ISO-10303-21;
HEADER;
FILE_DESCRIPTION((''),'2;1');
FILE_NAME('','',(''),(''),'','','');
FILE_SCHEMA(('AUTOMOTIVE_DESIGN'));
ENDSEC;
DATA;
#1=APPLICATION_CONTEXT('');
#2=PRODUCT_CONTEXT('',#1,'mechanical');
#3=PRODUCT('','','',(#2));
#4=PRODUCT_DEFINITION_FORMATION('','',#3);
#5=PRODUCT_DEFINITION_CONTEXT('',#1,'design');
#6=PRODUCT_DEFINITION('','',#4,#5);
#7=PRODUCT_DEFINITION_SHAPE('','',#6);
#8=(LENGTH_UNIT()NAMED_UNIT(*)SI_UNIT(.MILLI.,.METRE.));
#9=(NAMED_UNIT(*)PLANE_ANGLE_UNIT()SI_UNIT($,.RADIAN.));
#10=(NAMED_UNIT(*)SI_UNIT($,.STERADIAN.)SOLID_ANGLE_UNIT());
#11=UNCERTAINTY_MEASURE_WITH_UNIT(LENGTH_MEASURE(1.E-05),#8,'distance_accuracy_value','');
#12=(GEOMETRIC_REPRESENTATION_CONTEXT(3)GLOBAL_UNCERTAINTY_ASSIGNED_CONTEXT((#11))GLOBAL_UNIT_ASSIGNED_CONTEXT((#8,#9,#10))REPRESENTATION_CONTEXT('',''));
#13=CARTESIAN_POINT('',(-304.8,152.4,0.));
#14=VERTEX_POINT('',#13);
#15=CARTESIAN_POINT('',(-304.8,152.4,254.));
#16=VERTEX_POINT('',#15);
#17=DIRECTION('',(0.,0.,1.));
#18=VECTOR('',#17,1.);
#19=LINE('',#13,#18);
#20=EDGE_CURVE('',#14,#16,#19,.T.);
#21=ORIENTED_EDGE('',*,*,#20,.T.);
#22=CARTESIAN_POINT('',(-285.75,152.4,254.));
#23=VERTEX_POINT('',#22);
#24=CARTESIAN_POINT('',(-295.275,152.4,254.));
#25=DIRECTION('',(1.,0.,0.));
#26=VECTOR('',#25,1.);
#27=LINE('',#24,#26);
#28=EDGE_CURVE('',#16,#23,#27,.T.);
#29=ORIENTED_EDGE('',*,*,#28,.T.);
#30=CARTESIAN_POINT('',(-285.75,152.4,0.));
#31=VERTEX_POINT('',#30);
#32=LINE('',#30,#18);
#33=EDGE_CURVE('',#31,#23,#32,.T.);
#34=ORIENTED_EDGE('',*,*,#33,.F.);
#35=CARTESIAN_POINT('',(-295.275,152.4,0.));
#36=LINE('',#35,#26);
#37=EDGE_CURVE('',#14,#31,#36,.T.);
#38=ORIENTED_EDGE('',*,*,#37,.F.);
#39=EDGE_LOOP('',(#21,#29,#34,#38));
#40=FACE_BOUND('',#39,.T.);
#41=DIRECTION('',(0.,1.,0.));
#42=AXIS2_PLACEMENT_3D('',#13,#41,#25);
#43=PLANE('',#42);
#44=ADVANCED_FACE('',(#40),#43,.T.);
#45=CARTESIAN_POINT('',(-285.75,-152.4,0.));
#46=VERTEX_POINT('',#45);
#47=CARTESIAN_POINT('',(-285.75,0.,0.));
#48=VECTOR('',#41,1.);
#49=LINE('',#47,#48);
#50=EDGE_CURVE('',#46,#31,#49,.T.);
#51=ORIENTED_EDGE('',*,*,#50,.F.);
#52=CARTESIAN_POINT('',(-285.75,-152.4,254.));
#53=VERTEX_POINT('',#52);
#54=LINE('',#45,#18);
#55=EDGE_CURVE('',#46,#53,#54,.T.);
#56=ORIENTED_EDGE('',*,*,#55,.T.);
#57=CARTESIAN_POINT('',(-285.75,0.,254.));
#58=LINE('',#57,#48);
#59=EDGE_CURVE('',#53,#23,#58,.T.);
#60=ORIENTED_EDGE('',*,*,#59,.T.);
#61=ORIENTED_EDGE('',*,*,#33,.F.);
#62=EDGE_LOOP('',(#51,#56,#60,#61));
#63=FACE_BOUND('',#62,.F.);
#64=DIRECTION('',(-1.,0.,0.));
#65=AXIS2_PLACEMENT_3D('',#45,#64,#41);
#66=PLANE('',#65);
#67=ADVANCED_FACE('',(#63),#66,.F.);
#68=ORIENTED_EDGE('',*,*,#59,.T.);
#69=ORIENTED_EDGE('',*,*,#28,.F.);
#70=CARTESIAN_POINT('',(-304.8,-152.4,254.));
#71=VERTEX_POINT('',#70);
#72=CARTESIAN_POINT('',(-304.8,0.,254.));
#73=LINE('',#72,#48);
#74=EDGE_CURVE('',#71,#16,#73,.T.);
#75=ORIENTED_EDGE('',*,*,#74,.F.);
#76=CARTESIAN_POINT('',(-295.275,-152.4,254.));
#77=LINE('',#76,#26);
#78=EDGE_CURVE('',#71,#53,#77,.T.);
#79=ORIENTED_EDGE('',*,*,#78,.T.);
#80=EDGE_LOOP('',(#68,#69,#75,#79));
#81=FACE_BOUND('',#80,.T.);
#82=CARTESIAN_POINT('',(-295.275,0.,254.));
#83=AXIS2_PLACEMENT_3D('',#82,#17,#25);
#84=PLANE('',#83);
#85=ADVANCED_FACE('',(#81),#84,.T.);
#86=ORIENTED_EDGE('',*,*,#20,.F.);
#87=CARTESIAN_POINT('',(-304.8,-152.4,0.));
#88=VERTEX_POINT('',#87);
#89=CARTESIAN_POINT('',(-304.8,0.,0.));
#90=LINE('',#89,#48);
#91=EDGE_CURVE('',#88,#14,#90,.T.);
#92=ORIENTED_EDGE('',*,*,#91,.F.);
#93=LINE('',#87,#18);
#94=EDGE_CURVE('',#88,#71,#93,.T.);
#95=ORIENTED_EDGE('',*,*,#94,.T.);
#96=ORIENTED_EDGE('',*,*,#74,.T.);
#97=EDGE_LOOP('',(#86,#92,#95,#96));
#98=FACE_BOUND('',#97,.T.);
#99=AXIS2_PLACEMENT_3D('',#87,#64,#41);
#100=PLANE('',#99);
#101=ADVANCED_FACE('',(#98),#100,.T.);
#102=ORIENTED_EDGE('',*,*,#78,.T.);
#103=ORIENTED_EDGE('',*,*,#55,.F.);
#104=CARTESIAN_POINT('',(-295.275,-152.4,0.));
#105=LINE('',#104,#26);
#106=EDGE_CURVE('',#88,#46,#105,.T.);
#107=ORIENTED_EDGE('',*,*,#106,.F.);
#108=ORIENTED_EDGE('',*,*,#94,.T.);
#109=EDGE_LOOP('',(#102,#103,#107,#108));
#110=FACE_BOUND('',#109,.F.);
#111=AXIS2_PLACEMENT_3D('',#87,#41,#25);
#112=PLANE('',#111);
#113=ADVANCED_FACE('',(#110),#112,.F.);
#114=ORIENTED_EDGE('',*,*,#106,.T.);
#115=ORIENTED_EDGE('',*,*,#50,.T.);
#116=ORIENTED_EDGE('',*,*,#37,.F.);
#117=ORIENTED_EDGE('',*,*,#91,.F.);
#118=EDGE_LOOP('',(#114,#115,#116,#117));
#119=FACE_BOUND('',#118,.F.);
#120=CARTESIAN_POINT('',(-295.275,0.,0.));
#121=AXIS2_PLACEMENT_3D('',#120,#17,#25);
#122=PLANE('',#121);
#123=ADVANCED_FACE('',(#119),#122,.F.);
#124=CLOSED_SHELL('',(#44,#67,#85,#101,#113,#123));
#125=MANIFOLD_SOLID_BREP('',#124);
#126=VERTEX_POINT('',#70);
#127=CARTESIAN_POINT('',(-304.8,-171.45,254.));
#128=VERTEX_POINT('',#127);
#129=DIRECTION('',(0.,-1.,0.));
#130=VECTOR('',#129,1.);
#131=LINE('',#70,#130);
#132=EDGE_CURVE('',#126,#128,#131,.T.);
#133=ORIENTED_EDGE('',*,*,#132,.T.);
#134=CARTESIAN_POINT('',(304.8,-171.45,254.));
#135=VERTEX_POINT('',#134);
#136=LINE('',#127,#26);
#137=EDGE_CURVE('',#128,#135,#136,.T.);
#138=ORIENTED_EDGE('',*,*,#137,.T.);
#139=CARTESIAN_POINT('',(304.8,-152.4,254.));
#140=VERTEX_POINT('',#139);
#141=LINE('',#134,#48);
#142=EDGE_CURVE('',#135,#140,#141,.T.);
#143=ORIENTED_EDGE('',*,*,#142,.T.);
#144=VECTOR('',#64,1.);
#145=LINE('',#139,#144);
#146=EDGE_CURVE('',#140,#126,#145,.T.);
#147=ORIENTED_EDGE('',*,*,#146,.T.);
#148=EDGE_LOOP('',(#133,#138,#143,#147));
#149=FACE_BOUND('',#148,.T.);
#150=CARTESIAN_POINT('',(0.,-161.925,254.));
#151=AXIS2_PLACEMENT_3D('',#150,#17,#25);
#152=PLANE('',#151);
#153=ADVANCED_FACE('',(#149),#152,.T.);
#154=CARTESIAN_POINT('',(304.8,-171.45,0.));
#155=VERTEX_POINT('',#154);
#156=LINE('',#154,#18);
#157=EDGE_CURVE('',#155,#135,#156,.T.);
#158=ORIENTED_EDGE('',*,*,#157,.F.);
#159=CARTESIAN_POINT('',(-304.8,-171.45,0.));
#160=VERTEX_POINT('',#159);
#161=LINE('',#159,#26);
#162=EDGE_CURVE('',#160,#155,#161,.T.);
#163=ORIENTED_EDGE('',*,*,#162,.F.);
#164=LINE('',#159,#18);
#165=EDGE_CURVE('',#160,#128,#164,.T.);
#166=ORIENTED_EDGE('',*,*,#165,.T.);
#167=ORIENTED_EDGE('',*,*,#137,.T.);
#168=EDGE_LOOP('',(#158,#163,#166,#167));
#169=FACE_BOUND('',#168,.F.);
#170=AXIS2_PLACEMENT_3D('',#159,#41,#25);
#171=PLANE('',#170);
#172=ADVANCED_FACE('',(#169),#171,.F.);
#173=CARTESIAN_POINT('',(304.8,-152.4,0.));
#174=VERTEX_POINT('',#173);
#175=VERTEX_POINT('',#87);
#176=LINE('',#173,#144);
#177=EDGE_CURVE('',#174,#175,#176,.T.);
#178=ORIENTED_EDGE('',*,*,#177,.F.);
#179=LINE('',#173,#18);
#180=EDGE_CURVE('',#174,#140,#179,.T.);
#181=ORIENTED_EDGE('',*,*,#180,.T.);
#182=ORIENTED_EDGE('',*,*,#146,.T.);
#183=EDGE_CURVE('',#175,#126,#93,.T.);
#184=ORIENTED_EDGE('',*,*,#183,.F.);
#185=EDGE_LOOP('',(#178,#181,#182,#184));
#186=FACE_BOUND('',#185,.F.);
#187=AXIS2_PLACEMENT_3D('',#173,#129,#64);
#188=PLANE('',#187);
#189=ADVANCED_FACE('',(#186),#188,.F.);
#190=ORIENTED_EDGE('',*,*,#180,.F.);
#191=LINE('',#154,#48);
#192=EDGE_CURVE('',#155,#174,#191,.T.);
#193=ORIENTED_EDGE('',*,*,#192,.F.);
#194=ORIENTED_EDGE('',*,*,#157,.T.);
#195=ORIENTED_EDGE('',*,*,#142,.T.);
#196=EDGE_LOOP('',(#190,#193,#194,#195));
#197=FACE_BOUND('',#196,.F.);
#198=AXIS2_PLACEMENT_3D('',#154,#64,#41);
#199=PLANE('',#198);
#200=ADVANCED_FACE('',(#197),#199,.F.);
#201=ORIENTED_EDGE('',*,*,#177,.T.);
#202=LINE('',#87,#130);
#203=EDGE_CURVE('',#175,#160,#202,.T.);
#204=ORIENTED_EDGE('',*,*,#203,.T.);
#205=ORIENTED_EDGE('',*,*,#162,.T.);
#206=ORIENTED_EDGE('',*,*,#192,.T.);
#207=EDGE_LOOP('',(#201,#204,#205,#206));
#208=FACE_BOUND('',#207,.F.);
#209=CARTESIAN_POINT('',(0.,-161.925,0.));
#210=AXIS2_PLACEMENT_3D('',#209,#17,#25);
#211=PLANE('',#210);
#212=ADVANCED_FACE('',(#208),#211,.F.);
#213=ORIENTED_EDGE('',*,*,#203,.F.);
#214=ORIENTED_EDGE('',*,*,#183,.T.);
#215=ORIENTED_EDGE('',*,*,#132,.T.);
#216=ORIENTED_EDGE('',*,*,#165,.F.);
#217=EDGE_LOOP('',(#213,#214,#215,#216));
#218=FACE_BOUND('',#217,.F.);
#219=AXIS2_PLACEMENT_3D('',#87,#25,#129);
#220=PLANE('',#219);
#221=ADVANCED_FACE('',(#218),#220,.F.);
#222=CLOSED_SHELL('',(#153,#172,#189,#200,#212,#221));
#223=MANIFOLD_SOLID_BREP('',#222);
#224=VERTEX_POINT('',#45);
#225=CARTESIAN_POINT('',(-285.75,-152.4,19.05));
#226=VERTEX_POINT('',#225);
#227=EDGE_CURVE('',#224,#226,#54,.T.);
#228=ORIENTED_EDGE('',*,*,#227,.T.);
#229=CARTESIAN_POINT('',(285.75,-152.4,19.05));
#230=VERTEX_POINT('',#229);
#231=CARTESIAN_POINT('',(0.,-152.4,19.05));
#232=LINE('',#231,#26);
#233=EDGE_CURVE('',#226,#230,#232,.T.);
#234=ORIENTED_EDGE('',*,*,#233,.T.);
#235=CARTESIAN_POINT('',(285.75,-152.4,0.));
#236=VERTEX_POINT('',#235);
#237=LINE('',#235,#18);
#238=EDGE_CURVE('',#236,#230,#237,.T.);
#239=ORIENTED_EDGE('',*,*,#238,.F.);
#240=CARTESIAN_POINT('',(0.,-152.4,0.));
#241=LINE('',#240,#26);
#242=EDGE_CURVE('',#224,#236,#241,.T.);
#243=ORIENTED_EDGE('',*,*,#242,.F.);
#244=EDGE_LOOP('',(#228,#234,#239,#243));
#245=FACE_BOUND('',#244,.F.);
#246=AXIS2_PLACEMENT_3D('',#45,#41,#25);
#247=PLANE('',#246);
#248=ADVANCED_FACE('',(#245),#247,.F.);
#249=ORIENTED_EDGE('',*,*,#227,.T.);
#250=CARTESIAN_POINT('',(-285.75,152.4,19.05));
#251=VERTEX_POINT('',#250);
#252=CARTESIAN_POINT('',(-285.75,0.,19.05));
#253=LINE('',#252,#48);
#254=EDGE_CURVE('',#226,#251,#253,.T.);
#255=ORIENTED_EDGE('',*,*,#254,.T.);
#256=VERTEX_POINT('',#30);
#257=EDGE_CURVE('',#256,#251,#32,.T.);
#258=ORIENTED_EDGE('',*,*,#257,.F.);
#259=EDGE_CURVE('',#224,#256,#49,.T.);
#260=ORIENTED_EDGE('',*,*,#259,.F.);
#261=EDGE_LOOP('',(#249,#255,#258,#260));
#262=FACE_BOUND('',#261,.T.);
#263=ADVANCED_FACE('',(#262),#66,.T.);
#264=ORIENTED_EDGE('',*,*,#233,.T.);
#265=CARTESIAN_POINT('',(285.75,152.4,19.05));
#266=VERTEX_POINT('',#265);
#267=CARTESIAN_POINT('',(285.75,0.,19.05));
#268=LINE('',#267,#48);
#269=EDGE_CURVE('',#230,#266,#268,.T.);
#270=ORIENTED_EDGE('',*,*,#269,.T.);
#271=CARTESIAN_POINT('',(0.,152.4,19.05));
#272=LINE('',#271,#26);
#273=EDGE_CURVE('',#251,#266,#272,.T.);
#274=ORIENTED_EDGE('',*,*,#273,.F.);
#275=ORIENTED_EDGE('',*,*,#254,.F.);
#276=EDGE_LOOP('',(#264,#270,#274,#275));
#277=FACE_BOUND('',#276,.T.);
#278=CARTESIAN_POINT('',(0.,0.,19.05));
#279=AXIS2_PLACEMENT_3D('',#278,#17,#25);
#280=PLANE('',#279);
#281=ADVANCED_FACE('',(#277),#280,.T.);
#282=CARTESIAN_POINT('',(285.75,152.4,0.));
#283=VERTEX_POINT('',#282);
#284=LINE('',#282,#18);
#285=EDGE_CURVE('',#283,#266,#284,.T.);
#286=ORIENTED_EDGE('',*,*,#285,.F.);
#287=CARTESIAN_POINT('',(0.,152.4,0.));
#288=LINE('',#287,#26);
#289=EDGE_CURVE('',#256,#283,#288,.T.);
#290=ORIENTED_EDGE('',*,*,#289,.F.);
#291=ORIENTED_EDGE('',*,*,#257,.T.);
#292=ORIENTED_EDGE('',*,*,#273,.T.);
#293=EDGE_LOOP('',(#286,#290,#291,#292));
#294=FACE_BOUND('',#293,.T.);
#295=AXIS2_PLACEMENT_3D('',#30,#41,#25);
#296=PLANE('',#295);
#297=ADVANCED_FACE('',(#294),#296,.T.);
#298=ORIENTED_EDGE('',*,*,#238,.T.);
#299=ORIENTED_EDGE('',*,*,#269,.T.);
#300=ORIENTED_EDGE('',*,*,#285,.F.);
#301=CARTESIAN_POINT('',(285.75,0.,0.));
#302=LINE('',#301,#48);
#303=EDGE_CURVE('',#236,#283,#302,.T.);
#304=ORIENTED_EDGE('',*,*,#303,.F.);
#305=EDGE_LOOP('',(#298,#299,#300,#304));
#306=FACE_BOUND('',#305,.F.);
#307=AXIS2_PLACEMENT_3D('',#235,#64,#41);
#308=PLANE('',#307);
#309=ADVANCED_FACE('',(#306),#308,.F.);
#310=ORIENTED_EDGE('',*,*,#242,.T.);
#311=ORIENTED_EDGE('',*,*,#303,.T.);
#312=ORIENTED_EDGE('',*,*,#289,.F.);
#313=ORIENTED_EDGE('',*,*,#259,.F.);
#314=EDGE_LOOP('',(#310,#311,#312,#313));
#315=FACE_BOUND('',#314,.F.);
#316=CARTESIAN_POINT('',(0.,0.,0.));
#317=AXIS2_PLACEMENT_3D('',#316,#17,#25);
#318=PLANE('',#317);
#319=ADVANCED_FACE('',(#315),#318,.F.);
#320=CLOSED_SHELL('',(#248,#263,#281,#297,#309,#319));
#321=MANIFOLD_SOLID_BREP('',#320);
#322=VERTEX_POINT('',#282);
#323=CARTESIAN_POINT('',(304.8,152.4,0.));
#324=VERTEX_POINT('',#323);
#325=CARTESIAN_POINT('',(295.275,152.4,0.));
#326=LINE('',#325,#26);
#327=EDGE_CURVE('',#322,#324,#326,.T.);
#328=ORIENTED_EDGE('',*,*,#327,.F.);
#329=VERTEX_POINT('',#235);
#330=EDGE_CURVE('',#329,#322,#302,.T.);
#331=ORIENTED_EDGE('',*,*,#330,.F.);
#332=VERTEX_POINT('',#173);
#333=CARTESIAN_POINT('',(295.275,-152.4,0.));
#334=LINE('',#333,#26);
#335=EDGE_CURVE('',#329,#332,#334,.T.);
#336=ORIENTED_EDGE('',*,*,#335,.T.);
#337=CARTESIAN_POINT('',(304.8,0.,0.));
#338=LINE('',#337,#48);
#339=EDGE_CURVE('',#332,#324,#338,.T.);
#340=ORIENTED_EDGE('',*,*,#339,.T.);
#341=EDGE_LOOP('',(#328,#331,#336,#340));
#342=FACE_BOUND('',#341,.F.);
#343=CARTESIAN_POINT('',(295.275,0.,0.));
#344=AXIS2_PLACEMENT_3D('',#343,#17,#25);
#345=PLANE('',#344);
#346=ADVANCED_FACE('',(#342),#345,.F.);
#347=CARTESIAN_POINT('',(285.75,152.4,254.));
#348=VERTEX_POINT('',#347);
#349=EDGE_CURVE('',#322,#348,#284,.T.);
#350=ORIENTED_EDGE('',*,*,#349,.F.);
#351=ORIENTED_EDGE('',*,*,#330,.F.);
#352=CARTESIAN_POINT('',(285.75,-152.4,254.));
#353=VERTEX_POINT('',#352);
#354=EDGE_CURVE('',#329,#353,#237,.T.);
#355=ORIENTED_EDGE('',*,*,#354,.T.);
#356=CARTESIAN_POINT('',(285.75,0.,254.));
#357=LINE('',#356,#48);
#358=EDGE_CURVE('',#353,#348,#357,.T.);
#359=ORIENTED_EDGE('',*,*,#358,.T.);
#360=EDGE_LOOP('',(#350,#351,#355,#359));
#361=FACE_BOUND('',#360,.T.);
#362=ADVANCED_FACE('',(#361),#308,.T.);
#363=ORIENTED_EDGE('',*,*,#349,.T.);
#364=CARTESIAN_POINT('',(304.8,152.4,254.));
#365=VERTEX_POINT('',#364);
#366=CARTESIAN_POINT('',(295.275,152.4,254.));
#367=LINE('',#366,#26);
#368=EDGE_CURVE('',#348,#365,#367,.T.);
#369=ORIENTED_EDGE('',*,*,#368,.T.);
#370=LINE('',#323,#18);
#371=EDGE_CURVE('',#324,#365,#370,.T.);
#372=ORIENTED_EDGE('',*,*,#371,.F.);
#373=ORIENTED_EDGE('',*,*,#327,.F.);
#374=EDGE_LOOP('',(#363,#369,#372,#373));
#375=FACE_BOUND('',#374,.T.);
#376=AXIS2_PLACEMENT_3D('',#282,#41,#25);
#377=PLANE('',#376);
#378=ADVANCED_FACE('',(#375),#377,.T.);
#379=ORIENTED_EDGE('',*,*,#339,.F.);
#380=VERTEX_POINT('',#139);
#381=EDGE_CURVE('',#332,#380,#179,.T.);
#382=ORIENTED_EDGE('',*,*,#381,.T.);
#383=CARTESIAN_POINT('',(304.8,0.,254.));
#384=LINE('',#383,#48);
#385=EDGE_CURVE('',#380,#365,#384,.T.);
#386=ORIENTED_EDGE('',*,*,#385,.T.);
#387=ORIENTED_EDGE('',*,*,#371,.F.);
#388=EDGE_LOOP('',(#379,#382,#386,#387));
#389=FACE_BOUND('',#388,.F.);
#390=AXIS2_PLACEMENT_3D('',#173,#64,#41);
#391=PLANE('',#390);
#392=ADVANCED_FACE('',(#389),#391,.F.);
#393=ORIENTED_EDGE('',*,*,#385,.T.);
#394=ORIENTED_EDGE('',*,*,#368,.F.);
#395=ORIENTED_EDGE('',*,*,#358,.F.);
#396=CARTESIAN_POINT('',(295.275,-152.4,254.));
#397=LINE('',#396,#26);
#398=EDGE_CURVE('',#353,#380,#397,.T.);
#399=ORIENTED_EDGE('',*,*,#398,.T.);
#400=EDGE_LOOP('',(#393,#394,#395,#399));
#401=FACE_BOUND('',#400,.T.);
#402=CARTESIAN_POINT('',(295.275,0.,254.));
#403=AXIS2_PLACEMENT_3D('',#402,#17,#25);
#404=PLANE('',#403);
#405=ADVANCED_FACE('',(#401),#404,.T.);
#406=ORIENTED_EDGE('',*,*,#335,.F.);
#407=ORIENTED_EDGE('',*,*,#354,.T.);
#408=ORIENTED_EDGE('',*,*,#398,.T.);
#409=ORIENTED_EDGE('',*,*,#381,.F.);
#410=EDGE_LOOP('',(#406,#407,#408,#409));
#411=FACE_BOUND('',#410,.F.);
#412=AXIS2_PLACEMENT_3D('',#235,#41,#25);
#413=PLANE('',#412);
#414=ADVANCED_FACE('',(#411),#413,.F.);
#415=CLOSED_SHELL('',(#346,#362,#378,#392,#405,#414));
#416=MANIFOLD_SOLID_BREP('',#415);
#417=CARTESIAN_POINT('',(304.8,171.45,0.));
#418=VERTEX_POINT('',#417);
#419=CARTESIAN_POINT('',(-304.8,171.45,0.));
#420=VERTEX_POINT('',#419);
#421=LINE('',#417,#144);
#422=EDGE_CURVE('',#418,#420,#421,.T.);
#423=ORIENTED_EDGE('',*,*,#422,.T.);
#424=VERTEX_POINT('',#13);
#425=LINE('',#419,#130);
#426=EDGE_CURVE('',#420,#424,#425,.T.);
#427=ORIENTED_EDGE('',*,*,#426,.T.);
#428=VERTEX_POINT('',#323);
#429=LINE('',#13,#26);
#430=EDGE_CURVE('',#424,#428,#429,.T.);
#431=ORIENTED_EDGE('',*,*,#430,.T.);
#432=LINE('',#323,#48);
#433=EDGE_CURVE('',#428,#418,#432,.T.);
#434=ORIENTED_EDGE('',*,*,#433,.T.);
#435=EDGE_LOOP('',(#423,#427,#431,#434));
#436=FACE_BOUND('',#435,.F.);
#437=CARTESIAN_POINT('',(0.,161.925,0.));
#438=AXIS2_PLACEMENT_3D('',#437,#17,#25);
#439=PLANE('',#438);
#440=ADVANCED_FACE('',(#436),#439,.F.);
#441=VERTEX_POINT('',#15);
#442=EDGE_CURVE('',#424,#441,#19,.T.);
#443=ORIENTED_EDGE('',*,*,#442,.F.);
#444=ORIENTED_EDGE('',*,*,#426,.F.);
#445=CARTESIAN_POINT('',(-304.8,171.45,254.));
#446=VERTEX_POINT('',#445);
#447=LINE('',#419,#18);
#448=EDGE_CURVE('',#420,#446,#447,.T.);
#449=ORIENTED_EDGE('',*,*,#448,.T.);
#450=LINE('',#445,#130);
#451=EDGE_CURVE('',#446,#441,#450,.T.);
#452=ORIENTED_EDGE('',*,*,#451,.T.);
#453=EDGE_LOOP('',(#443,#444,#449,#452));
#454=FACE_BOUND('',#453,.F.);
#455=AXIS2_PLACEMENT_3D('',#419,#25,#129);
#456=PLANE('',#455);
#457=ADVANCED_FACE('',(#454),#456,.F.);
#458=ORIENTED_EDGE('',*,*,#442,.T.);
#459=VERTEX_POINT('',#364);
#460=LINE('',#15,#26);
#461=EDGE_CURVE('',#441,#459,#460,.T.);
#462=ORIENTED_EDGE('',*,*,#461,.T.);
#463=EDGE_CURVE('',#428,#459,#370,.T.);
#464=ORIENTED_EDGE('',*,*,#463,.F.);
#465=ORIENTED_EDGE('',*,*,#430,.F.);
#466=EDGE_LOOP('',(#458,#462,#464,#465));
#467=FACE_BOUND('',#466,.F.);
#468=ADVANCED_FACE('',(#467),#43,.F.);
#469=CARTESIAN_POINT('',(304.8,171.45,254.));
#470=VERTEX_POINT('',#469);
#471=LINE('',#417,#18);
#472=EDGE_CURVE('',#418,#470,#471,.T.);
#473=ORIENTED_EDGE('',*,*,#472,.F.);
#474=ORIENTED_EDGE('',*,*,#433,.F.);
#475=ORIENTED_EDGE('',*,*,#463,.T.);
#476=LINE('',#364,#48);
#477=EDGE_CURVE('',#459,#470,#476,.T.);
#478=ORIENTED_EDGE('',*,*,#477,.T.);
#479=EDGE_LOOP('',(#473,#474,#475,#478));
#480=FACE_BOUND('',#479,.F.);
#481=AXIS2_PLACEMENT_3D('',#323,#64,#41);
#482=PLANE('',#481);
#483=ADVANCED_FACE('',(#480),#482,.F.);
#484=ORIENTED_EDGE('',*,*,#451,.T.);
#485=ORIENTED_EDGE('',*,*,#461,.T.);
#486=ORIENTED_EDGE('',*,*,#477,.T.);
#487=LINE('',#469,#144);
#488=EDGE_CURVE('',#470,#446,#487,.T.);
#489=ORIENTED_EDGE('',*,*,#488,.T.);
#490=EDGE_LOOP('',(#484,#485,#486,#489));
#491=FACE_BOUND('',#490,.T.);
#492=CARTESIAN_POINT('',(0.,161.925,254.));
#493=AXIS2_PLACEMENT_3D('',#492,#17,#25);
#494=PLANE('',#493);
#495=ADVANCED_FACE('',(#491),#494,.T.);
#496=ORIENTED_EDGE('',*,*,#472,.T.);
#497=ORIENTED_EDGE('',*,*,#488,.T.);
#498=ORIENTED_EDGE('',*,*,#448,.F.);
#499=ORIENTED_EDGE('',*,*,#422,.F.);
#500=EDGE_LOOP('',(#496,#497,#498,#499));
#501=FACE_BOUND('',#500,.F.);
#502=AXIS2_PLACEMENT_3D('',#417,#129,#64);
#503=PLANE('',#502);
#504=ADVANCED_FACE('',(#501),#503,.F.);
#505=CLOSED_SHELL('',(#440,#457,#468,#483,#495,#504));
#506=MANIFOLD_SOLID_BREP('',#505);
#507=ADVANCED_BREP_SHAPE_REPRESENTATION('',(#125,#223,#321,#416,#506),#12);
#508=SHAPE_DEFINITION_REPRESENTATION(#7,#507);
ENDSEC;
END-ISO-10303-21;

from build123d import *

# Parameters (mm, degrees)
F2_W     = 571.5
F2_H     = 304.8
F3_DEPTH = 19.05
F2_W_2   = 19.05
F4_DEPTH = 254
F5_DEPTH = 254


# Not quite as in the source:
# - a variable given as a bare number and used for a length is read in inches; the dataset says mm whatever the document's units were


with BuildPart() as f3:
    # F2 (on Top) → F3 (new body)
    with BuildSketch(Plane.XY):
        Rectangle(F2_W, F2_H)
    extrude(amount=F3_DEPTH)


with BuildPart() as f4:
    # F2 (on Top) → F4 (new body)
    with BuildSketch(Plane.XY):
        with Locations((-295.275, 0)):
            Rectangle(F2_W_2, F2_H)
    extrude(amount=F4_DEPTH)


with BuildPart() as f4b:
    # F2 (on Top) → F4, piece 2 (new body)
    with BuildSketch(Plane.XY):
        with Locations((295.275, 0)):
            Rectangle(F2_W_2, F2_H)
    extrude(amount=F4_DEPTH)


with BuildPart() as f5:
    # F2 (on Top) → F5 (new body)
    with BuildSketch(Plane.XY):
        Polygon((304.8, -152.4), (285.75, -152.4), (-285.75, -152.4), (-304.8, -152.4), (-304.8, -171.45), (304.8, -171.45), align=None)
    extrude(amount=F5_DEPTH)


with BuildPart() as f5b:
    # F2 (on Top) → F5, piece 2 (new body)
    with BuildSketch(Plane.XY):
        Polygon((-285.75, 152.4), (285.75, 152.4), (304.8, 152.4), (304.8, 171.45), (-304.8, 171.45), (-304.8, 152.4), align=None)
    extrude(amount=F5_DEPTH)


solid = Compound([f3.part, f4.part, f4b.part, f5.part, f5b.part])
